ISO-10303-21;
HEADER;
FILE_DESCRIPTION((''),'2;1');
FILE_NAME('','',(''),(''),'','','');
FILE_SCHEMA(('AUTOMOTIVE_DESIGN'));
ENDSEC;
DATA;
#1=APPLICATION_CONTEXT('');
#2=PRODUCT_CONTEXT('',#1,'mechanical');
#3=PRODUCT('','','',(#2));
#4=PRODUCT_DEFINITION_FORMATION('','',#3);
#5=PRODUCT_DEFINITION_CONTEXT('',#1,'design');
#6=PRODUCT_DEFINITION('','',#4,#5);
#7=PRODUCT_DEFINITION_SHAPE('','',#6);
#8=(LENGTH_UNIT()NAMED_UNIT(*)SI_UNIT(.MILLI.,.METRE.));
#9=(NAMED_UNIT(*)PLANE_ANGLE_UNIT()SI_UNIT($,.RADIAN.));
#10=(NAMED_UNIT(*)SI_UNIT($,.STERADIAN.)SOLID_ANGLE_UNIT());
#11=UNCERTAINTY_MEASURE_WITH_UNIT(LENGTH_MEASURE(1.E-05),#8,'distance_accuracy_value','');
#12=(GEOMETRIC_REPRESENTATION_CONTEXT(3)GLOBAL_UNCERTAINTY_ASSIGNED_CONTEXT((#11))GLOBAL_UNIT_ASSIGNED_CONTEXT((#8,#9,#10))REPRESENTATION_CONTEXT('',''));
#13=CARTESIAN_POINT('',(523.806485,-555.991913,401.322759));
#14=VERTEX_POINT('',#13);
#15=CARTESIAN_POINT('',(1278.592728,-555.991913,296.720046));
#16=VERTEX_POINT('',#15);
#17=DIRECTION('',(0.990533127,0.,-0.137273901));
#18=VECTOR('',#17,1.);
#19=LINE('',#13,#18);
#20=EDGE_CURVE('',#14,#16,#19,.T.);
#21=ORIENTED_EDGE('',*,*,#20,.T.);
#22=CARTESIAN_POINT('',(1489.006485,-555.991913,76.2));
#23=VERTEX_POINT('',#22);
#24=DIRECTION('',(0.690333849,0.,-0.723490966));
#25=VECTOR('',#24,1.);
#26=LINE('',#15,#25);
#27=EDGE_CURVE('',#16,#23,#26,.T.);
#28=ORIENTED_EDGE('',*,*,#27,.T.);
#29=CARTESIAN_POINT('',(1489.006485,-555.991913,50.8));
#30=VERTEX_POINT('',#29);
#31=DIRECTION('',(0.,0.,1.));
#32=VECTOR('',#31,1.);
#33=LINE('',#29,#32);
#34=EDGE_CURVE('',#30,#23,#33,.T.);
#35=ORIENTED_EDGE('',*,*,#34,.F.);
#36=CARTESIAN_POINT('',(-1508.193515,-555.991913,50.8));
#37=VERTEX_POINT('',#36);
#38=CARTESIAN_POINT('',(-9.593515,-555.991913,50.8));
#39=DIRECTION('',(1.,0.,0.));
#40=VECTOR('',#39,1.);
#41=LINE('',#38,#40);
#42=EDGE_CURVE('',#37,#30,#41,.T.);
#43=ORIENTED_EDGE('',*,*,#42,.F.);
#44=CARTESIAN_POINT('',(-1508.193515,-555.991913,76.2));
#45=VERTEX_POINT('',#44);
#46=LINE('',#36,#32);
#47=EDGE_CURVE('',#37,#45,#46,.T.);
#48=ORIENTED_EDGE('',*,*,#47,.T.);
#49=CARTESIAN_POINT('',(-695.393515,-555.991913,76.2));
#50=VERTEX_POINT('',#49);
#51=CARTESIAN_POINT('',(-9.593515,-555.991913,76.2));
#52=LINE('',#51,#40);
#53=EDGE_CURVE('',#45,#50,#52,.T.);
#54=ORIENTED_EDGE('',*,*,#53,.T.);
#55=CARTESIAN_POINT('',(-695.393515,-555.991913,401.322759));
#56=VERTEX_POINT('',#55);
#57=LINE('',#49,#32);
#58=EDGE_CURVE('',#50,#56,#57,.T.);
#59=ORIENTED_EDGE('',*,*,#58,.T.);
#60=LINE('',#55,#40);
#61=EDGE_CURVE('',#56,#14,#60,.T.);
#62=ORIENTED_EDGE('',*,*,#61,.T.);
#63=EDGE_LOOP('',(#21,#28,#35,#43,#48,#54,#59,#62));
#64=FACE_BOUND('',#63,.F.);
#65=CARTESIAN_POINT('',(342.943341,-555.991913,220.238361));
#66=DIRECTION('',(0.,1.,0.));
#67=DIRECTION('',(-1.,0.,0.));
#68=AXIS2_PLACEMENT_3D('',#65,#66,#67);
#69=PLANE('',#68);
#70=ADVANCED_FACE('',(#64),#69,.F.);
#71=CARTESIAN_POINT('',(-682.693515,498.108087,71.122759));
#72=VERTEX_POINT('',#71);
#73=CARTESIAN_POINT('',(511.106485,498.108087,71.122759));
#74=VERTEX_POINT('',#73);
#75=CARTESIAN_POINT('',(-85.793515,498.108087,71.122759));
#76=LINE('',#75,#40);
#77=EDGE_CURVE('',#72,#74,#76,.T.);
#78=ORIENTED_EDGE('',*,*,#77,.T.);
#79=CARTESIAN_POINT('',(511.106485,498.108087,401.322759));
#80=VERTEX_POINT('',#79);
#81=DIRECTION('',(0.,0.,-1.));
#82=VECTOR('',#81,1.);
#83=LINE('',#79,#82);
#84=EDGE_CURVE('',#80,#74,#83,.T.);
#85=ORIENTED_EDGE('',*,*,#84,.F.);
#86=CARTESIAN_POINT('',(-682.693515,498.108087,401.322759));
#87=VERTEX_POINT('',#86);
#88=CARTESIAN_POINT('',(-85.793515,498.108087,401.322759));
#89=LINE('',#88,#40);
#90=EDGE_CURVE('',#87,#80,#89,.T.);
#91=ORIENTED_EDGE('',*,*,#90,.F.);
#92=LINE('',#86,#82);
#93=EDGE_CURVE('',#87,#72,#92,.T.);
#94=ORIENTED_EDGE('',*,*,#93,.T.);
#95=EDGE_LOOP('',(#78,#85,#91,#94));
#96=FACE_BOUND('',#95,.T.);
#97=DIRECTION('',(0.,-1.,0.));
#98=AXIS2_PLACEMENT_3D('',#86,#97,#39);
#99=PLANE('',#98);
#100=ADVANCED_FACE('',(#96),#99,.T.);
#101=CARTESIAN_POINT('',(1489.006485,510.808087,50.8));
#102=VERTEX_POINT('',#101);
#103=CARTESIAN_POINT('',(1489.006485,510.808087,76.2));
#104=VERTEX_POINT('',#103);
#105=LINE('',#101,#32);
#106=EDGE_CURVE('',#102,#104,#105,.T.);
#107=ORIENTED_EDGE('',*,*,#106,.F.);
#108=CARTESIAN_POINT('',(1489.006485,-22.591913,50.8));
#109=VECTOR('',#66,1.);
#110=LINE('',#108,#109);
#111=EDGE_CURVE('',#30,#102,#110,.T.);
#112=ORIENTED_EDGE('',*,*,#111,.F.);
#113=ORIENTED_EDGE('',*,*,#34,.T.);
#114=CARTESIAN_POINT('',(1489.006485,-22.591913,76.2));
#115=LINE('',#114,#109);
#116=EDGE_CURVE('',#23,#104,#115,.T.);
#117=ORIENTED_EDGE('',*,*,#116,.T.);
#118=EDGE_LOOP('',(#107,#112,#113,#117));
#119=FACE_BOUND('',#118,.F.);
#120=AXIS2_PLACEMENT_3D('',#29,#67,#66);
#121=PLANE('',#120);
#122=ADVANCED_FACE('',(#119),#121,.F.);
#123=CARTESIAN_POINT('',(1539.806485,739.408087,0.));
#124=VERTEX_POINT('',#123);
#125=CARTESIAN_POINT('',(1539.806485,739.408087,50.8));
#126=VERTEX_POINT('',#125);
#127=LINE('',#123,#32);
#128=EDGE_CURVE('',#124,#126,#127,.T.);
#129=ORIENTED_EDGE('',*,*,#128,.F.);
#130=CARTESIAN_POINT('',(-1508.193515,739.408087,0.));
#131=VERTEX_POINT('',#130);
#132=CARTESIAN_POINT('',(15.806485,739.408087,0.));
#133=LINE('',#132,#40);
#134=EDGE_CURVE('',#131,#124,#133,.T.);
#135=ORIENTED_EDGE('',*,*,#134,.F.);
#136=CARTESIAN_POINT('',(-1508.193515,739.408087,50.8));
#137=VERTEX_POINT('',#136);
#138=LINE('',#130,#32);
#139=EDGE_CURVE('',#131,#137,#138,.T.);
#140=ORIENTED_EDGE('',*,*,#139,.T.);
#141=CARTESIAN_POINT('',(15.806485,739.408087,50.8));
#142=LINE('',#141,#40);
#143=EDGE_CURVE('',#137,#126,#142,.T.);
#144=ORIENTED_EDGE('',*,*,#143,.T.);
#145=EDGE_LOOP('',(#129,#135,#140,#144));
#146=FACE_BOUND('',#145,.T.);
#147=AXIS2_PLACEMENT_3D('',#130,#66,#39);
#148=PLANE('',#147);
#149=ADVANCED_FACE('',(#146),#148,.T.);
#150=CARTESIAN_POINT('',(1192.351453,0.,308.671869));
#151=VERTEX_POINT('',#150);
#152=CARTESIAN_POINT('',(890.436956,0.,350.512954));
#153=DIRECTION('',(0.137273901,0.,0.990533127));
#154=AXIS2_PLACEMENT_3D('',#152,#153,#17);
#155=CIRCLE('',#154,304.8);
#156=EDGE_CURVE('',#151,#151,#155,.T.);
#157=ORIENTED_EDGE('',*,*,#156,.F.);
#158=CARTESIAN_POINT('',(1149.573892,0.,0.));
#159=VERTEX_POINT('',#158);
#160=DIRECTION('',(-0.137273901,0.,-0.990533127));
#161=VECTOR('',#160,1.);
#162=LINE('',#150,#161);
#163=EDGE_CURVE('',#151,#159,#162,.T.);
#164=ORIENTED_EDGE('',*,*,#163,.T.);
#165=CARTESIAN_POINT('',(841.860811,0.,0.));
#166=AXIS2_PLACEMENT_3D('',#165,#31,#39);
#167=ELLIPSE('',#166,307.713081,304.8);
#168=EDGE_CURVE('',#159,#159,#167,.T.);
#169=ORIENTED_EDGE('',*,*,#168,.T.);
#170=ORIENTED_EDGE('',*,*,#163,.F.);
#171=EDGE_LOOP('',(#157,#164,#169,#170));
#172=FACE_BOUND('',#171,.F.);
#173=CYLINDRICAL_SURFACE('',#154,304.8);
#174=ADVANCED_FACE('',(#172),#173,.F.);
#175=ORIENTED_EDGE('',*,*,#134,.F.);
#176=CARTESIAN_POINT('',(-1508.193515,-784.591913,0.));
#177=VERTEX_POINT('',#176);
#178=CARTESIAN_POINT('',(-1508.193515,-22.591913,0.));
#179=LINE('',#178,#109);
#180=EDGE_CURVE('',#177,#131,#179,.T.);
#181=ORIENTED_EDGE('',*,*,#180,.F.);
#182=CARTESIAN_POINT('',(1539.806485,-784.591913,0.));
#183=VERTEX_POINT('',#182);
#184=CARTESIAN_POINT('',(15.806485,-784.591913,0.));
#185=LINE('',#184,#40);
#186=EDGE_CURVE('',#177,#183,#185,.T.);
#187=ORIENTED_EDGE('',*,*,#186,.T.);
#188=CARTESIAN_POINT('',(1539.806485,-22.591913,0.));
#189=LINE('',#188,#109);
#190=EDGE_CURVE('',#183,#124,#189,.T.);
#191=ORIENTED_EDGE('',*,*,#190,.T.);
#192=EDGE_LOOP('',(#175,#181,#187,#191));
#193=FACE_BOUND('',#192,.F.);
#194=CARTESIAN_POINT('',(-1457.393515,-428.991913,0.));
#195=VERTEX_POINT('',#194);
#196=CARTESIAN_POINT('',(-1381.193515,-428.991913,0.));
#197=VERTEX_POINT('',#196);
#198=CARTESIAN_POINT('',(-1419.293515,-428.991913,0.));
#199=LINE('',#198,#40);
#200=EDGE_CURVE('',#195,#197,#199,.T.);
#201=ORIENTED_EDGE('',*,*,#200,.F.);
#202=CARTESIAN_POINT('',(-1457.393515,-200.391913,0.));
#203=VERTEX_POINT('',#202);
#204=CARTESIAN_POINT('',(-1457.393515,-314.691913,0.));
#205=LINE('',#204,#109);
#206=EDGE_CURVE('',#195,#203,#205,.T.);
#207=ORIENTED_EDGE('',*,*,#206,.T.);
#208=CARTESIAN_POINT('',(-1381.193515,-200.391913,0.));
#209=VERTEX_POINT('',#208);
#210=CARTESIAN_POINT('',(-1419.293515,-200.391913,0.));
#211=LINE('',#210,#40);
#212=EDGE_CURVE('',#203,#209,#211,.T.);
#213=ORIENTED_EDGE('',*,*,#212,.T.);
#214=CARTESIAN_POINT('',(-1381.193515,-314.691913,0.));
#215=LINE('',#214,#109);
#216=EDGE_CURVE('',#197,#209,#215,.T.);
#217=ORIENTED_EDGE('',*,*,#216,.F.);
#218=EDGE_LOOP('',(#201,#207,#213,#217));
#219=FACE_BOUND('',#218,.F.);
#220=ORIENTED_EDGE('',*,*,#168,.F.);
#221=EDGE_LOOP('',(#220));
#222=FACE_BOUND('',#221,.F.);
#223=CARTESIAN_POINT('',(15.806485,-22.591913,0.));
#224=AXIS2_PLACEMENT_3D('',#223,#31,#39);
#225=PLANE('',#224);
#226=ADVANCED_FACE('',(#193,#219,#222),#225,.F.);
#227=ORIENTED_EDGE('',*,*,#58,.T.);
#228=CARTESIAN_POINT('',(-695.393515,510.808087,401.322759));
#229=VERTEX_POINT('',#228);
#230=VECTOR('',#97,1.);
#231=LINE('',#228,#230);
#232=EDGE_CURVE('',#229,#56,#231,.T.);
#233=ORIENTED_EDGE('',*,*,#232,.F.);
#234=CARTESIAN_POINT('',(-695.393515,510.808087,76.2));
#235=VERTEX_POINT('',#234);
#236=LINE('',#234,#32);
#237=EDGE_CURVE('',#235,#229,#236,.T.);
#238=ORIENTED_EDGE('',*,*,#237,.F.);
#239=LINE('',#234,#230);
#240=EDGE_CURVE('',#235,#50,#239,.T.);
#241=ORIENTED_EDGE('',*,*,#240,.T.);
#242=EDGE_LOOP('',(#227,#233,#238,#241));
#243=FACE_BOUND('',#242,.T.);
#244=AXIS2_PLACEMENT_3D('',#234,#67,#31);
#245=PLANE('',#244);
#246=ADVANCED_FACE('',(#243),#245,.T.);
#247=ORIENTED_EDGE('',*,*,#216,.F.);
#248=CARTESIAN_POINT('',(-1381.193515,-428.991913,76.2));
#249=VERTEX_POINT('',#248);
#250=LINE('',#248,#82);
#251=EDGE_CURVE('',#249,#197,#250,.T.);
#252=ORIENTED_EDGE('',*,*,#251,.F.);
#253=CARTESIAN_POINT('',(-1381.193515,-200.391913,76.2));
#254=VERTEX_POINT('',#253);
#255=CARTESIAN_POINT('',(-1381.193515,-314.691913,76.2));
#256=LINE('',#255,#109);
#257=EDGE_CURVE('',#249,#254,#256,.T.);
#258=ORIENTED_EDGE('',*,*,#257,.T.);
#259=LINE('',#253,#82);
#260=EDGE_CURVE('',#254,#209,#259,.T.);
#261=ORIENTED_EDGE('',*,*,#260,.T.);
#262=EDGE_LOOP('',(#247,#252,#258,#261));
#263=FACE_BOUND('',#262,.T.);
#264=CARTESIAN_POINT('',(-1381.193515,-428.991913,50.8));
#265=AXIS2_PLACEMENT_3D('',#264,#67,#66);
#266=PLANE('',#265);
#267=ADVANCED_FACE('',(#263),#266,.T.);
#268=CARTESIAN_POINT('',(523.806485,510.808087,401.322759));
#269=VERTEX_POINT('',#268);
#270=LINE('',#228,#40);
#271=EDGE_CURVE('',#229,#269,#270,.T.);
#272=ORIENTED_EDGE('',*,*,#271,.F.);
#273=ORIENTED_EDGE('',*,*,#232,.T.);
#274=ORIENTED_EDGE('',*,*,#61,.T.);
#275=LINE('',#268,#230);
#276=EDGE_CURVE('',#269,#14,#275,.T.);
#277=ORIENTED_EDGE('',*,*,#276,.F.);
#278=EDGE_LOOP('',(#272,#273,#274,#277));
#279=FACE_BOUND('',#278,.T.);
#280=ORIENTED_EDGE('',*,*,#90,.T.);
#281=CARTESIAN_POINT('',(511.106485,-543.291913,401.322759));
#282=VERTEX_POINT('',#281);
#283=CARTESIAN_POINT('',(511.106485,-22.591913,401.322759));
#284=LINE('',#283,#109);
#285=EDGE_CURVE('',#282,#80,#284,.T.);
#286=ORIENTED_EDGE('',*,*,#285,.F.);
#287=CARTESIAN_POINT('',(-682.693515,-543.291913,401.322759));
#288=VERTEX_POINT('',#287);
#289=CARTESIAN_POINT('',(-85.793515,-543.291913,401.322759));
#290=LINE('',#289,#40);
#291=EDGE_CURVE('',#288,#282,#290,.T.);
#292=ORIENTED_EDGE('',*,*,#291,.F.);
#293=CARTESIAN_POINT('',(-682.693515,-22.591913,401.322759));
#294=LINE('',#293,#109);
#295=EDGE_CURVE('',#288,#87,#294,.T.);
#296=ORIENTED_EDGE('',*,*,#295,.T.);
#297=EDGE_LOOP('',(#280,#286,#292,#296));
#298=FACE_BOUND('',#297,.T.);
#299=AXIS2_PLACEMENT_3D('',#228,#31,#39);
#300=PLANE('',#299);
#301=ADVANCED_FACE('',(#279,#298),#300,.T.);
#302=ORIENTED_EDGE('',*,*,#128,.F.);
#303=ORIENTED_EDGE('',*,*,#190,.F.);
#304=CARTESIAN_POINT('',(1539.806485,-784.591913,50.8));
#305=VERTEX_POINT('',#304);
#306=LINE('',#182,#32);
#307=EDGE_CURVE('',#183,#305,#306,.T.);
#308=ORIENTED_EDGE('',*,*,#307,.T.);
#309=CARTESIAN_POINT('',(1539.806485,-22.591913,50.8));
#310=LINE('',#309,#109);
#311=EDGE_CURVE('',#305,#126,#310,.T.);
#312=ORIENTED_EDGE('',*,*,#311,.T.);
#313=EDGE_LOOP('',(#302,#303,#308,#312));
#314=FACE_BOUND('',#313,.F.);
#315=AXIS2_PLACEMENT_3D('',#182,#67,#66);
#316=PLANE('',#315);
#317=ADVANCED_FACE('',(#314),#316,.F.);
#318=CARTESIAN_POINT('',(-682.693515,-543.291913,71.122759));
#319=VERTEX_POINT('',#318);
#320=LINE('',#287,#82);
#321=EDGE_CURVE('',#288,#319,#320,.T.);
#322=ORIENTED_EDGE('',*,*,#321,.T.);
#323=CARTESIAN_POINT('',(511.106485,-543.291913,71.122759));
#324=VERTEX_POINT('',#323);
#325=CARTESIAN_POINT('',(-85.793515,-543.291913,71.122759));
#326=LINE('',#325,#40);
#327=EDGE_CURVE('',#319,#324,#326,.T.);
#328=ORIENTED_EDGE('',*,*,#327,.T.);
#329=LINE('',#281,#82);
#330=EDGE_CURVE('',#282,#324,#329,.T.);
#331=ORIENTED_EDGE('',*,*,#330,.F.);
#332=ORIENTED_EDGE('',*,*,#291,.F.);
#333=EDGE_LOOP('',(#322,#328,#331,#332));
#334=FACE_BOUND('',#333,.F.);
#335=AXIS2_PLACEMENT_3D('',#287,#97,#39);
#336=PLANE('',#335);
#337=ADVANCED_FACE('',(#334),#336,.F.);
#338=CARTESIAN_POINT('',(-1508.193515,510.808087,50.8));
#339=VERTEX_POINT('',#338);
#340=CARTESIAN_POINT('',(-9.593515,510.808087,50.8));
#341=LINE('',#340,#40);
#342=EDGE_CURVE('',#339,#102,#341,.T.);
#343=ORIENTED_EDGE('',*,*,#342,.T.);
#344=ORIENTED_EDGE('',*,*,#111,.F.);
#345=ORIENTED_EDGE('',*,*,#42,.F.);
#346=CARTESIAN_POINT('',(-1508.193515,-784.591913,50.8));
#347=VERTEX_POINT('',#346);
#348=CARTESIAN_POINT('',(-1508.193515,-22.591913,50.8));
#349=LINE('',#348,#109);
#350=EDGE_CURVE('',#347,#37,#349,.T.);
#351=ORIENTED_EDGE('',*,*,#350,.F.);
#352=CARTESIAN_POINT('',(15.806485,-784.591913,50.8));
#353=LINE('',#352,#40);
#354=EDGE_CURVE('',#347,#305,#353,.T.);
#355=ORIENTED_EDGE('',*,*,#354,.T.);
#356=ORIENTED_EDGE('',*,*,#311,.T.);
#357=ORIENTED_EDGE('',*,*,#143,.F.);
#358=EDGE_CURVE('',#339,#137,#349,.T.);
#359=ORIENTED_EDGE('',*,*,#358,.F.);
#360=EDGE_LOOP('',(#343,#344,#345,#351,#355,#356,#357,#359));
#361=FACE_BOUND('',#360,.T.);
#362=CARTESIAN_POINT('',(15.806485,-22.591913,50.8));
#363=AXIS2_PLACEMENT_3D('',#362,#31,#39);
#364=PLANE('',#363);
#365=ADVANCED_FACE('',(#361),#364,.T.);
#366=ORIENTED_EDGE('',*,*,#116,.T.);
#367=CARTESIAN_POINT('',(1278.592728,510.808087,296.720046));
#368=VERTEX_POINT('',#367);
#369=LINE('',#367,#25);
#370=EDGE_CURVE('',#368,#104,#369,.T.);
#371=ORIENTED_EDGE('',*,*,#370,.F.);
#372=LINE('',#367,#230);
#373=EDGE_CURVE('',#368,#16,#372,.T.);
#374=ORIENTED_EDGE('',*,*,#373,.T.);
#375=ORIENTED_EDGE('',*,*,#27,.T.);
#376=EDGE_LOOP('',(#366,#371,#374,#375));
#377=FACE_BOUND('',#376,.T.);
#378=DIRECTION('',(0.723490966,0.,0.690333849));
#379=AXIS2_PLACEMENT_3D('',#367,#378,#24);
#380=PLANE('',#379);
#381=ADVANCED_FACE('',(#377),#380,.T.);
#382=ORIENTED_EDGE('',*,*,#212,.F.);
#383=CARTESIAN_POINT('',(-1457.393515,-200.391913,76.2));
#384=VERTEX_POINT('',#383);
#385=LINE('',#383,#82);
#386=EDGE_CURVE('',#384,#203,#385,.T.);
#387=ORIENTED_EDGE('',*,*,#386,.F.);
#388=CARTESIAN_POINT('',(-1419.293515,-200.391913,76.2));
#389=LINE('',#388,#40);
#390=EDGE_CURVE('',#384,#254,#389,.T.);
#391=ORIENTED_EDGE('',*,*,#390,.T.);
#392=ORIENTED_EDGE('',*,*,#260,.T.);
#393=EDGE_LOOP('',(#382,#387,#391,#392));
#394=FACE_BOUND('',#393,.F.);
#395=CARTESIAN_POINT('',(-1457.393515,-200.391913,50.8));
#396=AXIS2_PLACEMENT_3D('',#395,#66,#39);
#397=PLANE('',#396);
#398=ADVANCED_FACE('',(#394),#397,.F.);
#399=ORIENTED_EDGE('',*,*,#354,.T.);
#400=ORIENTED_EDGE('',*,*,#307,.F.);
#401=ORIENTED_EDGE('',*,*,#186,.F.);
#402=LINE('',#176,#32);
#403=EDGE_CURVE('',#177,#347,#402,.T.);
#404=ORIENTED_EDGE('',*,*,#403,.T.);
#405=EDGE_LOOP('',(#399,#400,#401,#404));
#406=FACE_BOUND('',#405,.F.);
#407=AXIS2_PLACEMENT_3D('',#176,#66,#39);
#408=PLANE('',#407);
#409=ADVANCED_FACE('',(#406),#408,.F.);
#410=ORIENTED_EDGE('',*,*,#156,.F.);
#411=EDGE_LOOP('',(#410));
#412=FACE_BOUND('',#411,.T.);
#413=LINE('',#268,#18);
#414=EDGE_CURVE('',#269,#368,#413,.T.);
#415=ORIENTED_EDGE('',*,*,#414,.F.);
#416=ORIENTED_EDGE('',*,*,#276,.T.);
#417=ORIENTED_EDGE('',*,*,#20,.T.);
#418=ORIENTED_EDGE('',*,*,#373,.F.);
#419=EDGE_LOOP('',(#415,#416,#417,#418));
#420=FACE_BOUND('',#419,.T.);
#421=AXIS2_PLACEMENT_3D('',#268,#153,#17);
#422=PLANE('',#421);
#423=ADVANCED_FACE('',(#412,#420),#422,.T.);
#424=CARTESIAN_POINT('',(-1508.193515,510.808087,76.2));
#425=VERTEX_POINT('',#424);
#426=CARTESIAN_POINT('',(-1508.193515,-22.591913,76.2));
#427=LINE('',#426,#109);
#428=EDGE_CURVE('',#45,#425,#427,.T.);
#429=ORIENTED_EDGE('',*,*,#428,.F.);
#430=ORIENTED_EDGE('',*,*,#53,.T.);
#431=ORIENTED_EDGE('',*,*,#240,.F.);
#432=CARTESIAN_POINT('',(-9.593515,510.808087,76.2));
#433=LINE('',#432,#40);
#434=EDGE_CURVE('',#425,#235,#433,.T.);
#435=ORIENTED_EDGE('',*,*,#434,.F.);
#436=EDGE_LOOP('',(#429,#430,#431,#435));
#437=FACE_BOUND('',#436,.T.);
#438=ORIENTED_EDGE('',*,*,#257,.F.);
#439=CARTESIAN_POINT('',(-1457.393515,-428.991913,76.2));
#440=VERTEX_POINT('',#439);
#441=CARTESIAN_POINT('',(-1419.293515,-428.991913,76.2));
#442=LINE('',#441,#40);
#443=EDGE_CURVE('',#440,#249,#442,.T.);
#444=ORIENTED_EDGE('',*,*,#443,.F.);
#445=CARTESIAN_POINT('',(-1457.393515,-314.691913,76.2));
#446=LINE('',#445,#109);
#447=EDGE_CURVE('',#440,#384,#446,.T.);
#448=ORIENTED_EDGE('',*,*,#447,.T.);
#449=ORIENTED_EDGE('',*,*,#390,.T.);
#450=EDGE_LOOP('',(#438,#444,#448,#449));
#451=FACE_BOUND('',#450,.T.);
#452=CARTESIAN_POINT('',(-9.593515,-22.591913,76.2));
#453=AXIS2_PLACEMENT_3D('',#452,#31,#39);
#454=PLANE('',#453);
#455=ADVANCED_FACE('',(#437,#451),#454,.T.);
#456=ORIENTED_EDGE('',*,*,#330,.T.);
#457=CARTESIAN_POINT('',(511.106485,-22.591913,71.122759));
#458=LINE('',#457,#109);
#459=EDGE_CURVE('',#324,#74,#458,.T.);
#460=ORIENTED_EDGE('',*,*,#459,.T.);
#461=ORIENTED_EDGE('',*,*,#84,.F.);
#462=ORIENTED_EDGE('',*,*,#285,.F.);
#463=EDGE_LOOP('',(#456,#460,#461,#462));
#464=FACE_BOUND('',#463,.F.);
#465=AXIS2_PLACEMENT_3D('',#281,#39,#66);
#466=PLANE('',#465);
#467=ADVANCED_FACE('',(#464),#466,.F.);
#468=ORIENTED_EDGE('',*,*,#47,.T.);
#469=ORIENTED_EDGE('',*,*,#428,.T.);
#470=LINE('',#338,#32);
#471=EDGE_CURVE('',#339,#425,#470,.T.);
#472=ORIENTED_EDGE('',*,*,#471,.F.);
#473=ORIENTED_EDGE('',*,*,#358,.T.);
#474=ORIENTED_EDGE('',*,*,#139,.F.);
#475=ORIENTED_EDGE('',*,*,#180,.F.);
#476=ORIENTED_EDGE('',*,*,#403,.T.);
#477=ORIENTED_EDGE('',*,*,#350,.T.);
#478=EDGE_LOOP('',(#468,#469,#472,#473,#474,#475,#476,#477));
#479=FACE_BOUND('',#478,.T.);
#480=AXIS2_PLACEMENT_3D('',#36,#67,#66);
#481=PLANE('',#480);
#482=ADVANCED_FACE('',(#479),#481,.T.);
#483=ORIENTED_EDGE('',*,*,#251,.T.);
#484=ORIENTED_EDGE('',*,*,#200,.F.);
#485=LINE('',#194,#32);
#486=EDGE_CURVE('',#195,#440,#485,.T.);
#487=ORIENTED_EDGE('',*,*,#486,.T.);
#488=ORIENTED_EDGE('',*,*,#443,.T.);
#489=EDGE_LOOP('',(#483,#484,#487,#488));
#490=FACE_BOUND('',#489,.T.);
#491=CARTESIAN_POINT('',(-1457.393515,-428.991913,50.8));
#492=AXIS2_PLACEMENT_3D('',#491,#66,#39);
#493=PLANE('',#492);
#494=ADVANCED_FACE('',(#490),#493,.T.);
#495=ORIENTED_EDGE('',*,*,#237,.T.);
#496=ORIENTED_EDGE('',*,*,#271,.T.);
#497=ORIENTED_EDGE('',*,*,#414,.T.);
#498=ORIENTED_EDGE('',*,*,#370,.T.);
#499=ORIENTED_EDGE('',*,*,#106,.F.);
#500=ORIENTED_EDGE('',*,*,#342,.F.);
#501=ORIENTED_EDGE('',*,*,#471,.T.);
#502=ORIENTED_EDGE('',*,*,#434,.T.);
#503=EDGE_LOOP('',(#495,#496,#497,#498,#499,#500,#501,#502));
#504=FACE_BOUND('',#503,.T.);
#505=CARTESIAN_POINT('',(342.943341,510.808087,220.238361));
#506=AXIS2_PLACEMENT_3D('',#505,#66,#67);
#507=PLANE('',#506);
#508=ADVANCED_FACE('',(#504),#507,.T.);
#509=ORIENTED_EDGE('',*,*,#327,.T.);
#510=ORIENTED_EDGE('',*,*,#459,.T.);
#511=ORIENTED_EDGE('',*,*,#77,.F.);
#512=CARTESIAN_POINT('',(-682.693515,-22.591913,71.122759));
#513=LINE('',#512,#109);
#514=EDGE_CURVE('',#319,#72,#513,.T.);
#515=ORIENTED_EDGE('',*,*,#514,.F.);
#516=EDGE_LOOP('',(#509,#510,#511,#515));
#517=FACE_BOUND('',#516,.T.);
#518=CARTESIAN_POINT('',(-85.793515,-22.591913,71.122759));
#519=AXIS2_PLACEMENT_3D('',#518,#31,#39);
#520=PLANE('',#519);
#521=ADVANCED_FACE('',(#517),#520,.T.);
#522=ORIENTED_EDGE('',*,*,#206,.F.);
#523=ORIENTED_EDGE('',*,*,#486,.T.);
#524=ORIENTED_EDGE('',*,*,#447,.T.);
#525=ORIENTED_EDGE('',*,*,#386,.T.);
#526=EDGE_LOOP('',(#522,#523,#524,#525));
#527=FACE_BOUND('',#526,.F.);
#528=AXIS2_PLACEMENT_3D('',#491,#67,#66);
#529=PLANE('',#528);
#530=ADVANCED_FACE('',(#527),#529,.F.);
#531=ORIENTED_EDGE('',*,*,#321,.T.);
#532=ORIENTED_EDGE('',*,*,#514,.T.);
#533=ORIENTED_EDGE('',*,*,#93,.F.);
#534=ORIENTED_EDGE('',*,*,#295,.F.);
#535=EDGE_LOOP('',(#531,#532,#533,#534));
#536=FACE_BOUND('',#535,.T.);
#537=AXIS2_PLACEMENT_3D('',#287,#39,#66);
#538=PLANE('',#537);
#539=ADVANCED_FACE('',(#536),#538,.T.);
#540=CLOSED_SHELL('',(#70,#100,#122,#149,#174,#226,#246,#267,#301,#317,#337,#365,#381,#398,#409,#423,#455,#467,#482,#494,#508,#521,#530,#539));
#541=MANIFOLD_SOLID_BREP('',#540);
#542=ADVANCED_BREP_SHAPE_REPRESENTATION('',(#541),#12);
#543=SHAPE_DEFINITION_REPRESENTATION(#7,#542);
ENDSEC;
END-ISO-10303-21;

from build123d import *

# Parameters (mm, degrees)
F0_W     = 3048
F0_H     = 1524
F0_W_2   = 76.2
F0_H_2   = 228.6
F1_DEPTH = 50.8
F2_W     = 2997.2
F2_H     = 1066.8
F2_W_2   = 76.2
F2_H_2   = 228.6
F3_DEPTH = 25.4
F5_DEPTH = 1066.8
F6_R     = 304.8
F7_DEPTH = 676.4650551683
F8_W     = 1193.8
F8_H     = 1041.4
F9_DEPTH = 330.2


with BuildPart() as f1:
    # F0 (on Top) → F1 (new body)
    with BuildSketch(Plane.XY):
        with Locations((15.8064851761, -22.5919132233)):
            Rectangle(F0_W, F0_H)
        with Locations((-1419.2935148239, -314.6919132233)):
            Rectangle(F0_W_2, F0_H_2, mode=Mode.SUBTRACT)
    extrude(amount=F1_DEPTH)

    # F2 (on face) → F3 (join)
    with BuildSketch(Plane.XY.offset(50.8)):
        with Locations((-9.5935148239, -22.5919132233)):
            Rectangle(F2_W, F2_H)
        with Locations((-1419.2935148239, -314.6919132233)):
            Rectangle(F2_W_2, F2_H_2, mode=Mode.SUBTRACT)
    extrude(amount=F3_DEPTH)

    # F4 (on face) → F5 (join)
    with BuildSketch(Plane(origin=(0, 510.8080867767, 0), x_dir=(-1, 0, 0), z_dir=(0, 1, 0))):
        Polygon((-1278.5927280739, 296.7200463045), (-1489.0064851761, 76.2), (695.3935148239, 76.2), (695.3935148239, 401.3227591385), (-523.8064851761, 401.3227591385), align=None)
    extrude(amount=-F5_DEPTH)

    # F6 (on face) → F7 (cut, through all)
    with BuildSketch(Plane(origin=(64.4402743808, 0, 464.9844279694), x_dir=(0.9905331272, 0, -0.1372739014), z_dir=(0.1372739014, 0, 0.9905331272))):
        with Locations((833.8910219943, 0)):
            Circle(F6_R)
    extrude(amount=-F7_DEPTH, mode=Mode.SUBTRACT)

    # F8 (on face) → F9 (cut)
    with BuildSketch(Plane.XY.offset(401.3227591385)):
        with Locations((-85.7935148239, -22.5919132233)):
            Rectangle(F8_W, F8_H)
    extrude(amount=-F9_DEPTH, mode=Mode.SUBTRACT)


solid = f1.part
